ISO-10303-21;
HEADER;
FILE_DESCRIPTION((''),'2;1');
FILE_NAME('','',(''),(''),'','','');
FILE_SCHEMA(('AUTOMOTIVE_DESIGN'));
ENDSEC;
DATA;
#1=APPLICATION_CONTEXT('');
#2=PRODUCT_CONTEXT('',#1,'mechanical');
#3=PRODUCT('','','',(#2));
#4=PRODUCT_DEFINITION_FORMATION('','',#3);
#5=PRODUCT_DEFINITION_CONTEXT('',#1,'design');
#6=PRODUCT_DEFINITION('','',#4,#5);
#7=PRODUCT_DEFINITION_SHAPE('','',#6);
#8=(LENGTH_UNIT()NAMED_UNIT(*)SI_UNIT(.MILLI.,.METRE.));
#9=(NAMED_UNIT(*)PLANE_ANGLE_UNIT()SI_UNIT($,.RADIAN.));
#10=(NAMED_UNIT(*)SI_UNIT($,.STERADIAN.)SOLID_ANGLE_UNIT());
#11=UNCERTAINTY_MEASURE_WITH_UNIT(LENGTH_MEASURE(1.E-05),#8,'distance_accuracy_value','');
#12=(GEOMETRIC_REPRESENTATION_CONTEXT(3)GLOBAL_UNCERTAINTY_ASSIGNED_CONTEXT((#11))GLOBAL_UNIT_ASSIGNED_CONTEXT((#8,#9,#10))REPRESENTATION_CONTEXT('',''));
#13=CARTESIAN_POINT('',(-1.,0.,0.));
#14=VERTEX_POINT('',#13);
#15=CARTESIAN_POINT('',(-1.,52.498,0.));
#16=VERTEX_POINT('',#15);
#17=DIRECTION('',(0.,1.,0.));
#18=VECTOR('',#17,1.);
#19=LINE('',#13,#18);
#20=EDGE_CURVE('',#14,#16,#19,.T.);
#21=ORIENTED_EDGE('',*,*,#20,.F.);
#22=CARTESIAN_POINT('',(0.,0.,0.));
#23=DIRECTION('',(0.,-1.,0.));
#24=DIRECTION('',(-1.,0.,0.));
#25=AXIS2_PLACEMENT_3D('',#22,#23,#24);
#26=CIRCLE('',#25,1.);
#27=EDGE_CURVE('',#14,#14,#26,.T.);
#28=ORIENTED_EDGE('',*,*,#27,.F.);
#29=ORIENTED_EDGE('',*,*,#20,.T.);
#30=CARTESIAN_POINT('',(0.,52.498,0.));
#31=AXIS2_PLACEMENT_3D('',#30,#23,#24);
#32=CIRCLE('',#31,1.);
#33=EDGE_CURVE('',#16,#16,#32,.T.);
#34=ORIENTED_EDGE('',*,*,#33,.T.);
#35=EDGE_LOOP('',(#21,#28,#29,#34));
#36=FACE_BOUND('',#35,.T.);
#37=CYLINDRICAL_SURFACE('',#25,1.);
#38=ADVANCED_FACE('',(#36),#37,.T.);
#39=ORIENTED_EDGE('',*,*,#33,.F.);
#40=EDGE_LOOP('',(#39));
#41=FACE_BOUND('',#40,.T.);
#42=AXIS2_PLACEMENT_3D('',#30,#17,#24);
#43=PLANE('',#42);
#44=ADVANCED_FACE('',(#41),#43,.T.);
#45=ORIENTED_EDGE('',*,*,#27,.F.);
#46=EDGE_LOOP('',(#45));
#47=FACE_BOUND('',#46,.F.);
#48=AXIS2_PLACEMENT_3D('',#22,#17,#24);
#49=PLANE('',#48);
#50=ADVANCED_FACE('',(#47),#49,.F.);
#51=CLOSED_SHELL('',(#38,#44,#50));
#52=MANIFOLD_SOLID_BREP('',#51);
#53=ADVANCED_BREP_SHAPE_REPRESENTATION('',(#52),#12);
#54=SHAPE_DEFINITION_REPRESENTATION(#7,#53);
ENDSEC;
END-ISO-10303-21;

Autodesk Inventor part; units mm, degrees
ref_plane "YZ Plane" through (0, 0, 0) normal (1, 0, 0) x (0, 1, 0)
ref_plane "XZ Plane" through (0, 0, 0) normal (0, 1, 0) x (-1, 0, 0)
ref_plane "XY Plane" through (0, 0, 0) normal (0, 0, 1) x (1, 0, 0)
sketch "Sketch1" plane through (0, 0, 0) normal (0, 1, 0) x (-1, 0, 0)
  circle A0 centre (0, 0) radius 1
  dimension "d0" = 2
extrude "Extrusion1" add sketch "Sketch1" along normal blind 55
move faces "Move1" translate (0, -2.5, 0) faces at (-0.5848, 55, -0.397)
move faces "Move2" translate (0, -0.002, 0) faces at (-0.2495, 52.5, 0.221)
properties part number "LOOP1_COLL_L"
